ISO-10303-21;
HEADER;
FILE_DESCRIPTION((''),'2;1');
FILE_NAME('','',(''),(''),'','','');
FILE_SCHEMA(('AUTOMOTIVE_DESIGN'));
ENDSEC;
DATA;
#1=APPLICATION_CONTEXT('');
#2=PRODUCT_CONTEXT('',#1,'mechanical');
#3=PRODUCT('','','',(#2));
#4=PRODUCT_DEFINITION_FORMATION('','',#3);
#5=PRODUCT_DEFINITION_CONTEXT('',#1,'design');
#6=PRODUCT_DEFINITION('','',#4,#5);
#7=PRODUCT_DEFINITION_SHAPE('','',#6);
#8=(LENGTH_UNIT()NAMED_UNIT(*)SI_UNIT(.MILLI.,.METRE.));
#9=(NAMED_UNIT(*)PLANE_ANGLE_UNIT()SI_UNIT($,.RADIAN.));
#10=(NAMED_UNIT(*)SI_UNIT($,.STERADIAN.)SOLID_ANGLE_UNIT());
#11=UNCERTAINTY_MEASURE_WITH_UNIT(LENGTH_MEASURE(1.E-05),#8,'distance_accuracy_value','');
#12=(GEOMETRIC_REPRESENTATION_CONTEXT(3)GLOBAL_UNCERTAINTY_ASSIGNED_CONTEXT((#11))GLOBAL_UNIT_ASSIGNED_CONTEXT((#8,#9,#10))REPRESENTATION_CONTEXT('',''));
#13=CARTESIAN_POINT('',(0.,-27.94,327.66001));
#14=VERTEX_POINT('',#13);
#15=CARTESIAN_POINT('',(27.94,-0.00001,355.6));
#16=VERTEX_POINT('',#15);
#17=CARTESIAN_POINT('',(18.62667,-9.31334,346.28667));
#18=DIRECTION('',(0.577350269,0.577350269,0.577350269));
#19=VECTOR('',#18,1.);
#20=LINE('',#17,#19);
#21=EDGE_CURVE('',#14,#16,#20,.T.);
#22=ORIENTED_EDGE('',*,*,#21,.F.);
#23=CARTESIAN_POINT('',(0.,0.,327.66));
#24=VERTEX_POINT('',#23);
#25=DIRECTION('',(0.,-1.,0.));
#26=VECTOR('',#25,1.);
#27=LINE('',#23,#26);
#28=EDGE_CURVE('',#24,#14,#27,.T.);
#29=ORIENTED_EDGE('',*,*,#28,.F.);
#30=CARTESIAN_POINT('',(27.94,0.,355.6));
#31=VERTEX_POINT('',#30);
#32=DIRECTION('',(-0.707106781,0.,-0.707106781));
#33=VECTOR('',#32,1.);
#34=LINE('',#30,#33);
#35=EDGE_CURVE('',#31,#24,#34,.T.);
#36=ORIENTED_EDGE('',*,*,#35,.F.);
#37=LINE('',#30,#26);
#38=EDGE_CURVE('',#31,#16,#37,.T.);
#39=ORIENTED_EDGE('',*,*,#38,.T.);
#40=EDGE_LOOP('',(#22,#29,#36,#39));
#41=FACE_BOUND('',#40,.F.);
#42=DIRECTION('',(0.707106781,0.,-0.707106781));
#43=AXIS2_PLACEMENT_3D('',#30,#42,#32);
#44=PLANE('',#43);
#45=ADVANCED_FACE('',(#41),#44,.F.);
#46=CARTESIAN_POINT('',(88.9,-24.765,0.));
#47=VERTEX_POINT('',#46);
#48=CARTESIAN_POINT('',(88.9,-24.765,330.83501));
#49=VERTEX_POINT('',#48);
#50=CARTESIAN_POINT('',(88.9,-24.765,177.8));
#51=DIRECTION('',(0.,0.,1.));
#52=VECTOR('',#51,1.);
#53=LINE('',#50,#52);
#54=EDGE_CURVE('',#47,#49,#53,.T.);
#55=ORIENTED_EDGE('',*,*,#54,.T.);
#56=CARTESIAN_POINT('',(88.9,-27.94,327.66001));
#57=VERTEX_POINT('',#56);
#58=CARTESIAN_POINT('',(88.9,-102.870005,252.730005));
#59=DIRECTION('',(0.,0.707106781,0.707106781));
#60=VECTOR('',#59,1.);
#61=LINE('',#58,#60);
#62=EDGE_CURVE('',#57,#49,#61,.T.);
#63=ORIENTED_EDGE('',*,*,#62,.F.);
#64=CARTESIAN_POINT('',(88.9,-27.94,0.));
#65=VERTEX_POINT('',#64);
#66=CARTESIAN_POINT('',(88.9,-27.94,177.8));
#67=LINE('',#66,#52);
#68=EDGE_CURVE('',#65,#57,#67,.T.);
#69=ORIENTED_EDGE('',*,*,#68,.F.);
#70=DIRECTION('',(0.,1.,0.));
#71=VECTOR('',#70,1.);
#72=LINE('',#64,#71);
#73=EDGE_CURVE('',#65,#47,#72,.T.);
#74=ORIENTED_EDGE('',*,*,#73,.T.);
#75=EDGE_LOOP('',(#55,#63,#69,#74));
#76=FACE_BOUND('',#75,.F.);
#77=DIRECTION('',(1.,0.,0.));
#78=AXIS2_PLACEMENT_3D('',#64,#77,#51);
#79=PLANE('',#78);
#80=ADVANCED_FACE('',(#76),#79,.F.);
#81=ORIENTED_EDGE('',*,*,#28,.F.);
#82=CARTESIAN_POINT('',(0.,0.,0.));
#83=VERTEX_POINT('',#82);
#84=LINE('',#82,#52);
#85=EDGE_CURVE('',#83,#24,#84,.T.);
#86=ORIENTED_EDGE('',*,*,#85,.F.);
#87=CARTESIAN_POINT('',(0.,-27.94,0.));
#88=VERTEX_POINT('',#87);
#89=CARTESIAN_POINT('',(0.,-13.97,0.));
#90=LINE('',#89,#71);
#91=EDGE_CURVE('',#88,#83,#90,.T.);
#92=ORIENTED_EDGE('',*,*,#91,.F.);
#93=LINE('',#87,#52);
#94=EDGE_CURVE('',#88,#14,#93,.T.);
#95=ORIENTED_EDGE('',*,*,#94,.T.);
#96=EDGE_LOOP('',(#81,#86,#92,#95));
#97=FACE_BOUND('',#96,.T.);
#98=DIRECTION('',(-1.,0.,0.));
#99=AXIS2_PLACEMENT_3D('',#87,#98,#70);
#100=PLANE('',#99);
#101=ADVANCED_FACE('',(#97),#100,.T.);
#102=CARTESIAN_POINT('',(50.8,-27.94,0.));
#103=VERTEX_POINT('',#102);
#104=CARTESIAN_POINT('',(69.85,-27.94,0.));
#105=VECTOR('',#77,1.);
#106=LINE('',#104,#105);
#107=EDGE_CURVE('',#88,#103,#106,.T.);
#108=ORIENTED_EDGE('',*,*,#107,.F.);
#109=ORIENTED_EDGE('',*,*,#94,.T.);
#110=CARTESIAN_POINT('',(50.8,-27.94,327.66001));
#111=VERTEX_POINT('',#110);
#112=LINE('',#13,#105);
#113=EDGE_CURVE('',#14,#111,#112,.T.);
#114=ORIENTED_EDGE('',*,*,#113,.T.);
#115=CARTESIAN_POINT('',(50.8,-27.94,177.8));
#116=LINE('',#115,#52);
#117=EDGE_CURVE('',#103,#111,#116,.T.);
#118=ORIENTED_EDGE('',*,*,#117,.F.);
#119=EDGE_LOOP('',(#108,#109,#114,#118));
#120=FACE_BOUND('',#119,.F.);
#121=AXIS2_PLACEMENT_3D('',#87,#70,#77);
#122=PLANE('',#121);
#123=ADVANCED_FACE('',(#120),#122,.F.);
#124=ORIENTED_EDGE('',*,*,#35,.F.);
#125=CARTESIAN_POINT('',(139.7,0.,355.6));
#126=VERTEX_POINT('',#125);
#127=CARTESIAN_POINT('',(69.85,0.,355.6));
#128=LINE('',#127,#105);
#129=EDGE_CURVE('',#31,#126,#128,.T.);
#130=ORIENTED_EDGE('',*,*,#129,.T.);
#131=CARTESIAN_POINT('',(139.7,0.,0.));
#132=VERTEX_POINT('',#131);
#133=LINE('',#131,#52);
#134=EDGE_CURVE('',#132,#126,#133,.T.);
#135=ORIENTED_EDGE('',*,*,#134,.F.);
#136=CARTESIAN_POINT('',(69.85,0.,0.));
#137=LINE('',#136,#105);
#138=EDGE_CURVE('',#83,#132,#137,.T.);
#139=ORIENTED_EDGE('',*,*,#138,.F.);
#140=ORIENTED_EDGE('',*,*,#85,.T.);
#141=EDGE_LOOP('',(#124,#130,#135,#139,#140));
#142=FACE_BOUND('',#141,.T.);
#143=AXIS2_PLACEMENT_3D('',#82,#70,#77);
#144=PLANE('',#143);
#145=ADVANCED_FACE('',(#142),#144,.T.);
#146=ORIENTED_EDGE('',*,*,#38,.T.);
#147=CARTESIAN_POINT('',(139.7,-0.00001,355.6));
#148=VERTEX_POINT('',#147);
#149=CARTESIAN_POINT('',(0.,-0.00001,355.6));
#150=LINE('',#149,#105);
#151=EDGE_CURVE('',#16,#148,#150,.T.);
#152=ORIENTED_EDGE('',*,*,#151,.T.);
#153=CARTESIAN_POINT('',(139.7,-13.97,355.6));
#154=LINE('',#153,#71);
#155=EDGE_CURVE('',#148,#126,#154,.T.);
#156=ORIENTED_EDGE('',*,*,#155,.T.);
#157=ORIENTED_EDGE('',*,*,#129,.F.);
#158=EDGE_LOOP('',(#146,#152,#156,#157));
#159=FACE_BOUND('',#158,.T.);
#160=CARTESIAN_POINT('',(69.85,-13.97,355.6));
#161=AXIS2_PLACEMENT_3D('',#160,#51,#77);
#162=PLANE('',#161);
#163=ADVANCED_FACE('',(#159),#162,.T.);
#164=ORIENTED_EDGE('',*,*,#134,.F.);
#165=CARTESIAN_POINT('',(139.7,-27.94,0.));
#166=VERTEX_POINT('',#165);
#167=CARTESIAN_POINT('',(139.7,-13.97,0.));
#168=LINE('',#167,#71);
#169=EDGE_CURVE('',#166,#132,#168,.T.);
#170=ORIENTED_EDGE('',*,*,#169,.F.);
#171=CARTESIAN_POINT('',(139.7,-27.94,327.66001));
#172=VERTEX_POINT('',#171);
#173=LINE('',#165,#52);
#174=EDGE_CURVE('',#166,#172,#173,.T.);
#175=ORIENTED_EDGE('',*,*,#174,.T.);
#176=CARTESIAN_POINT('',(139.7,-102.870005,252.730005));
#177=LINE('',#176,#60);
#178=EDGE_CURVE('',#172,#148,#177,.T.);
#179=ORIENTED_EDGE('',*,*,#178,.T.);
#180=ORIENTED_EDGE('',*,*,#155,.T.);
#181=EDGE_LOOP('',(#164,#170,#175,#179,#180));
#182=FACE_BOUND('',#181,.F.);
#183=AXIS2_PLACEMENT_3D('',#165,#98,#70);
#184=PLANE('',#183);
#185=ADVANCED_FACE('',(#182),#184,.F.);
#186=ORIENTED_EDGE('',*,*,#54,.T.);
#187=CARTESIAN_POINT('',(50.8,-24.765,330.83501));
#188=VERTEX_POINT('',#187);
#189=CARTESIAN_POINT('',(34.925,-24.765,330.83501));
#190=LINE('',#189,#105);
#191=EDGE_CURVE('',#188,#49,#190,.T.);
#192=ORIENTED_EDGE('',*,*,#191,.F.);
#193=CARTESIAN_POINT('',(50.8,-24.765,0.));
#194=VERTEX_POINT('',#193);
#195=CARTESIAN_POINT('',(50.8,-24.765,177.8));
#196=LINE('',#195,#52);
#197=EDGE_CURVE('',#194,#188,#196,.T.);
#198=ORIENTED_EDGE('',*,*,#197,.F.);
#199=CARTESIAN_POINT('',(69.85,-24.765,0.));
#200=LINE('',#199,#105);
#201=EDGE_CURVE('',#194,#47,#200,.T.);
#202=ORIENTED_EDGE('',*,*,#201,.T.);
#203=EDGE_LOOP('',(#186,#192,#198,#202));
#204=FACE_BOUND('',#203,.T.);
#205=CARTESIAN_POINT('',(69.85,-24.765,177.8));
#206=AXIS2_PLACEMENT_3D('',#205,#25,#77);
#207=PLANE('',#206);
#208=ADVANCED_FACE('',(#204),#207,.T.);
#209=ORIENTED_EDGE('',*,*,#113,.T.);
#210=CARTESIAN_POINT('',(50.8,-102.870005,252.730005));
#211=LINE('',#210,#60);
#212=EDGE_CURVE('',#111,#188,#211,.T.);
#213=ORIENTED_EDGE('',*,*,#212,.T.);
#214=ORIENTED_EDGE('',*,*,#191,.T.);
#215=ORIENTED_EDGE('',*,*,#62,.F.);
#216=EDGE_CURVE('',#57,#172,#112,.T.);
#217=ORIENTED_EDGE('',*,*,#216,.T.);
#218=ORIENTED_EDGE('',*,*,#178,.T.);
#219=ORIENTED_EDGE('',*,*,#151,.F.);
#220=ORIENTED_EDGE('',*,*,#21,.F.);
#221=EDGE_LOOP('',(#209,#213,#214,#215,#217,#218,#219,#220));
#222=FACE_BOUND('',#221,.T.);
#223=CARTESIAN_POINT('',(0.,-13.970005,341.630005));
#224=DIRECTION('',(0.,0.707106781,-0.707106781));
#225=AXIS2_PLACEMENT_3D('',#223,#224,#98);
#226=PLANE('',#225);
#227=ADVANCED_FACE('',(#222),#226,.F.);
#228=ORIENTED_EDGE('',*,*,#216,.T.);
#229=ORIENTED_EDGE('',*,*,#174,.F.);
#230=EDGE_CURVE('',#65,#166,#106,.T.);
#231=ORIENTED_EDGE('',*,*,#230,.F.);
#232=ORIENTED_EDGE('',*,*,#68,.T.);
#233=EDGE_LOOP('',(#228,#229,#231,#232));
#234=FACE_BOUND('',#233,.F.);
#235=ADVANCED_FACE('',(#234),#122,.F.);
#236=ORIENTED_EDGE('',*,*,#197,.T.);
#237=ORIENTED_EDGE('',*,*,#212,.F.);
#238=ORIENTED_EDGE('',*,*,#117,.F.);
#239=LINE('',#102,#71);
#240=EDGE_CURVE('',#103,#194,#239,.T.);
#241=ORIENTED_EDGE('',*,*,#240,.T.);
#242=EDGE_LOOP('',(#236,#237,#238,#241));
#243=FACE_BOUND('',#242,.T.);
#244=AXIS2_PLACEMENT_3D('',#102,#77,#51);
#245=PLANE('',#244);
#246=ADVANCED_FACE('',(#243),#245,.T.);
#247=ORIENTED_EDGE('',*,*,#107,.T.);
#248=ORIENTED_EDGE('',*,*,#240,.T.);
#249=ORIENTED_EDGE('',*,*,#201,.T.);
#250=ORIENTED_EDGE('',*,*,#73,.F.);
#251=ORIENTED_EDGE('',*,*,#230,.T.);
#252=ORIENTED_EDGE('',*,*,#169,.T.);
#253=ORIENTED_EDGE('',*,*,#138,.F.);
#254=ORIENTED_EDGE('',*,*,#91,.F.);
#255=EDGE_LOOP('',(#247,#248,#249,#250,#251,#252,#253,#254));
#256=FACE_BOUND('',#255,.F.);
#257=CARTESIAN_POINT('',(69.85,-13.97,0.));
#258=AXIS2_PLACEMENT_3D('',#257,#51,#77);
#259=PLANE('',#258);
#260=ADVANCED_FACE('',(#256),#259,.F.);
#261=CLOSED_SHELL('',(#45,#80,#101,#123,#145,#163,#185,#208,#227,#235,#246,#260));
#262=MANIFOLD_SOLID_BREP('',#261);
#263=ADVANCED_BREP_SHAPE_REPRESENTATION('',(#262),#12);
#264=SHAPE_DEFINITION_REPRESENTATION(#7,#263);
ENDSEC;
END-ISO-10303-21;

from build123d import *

# Parameters (mm, degrees)
F0_W     = 139.7
F0_H     = 27.94
F1_DEPTH = 355.6
F2_SIZE  = 27.93999
F3_W     = 38.1
F3_H     = 355.6
F4_DEPTH = 3.175
F6_DEPTH = 38.1


# Not quite as in the source:
# - a fillet or chamfer is up to 0.001 mm smaller than in the source, because OpenCascade refuses the exact size


with BuildPart() as f1:
    # F0 (on Top) → F1 (new body)
    with BuildSketch(Plane.XY):
        with Locations((69.85, -13.97)):
            Rectangle(F0_W, F0_H)
    extrude(amount=F1_DEPTH)

    # F2 (size 27.94 in the source; OpenCascade refuses exactly that, so slightly less here)
    f2_edges = [f1.edges().sort_by_distance(p)[0] for p in [
        (69.85, -27.94, 355.6),
    ]]
    chamfer(f2_edges, length=F2_SIZE)

    # F3 (on face) → F4 (cut)
    with BuildSketch(Plane.XZ.offset(27.94)):
        with Locations((69.85, 177.8)):
            Rectangle(F3_W, F3_H)
    extrude(amount=-F4_DEPTH, mode=Mode.SUBTRACT)

    # F5 (on face) → F6 (cut)
    with BuildSketch(Plane(origin=(0, 0, 0), x_dir=(-1, 0, 0), z_dir=(0, 1, 0))):
        Polygon((0, 327.66), (0, 355.6), (-27.94, 355.6), align=None)
    extrude(amount=-F6_DEPTH, mode=Mode.SUBTRACT)


solid = f1.part
